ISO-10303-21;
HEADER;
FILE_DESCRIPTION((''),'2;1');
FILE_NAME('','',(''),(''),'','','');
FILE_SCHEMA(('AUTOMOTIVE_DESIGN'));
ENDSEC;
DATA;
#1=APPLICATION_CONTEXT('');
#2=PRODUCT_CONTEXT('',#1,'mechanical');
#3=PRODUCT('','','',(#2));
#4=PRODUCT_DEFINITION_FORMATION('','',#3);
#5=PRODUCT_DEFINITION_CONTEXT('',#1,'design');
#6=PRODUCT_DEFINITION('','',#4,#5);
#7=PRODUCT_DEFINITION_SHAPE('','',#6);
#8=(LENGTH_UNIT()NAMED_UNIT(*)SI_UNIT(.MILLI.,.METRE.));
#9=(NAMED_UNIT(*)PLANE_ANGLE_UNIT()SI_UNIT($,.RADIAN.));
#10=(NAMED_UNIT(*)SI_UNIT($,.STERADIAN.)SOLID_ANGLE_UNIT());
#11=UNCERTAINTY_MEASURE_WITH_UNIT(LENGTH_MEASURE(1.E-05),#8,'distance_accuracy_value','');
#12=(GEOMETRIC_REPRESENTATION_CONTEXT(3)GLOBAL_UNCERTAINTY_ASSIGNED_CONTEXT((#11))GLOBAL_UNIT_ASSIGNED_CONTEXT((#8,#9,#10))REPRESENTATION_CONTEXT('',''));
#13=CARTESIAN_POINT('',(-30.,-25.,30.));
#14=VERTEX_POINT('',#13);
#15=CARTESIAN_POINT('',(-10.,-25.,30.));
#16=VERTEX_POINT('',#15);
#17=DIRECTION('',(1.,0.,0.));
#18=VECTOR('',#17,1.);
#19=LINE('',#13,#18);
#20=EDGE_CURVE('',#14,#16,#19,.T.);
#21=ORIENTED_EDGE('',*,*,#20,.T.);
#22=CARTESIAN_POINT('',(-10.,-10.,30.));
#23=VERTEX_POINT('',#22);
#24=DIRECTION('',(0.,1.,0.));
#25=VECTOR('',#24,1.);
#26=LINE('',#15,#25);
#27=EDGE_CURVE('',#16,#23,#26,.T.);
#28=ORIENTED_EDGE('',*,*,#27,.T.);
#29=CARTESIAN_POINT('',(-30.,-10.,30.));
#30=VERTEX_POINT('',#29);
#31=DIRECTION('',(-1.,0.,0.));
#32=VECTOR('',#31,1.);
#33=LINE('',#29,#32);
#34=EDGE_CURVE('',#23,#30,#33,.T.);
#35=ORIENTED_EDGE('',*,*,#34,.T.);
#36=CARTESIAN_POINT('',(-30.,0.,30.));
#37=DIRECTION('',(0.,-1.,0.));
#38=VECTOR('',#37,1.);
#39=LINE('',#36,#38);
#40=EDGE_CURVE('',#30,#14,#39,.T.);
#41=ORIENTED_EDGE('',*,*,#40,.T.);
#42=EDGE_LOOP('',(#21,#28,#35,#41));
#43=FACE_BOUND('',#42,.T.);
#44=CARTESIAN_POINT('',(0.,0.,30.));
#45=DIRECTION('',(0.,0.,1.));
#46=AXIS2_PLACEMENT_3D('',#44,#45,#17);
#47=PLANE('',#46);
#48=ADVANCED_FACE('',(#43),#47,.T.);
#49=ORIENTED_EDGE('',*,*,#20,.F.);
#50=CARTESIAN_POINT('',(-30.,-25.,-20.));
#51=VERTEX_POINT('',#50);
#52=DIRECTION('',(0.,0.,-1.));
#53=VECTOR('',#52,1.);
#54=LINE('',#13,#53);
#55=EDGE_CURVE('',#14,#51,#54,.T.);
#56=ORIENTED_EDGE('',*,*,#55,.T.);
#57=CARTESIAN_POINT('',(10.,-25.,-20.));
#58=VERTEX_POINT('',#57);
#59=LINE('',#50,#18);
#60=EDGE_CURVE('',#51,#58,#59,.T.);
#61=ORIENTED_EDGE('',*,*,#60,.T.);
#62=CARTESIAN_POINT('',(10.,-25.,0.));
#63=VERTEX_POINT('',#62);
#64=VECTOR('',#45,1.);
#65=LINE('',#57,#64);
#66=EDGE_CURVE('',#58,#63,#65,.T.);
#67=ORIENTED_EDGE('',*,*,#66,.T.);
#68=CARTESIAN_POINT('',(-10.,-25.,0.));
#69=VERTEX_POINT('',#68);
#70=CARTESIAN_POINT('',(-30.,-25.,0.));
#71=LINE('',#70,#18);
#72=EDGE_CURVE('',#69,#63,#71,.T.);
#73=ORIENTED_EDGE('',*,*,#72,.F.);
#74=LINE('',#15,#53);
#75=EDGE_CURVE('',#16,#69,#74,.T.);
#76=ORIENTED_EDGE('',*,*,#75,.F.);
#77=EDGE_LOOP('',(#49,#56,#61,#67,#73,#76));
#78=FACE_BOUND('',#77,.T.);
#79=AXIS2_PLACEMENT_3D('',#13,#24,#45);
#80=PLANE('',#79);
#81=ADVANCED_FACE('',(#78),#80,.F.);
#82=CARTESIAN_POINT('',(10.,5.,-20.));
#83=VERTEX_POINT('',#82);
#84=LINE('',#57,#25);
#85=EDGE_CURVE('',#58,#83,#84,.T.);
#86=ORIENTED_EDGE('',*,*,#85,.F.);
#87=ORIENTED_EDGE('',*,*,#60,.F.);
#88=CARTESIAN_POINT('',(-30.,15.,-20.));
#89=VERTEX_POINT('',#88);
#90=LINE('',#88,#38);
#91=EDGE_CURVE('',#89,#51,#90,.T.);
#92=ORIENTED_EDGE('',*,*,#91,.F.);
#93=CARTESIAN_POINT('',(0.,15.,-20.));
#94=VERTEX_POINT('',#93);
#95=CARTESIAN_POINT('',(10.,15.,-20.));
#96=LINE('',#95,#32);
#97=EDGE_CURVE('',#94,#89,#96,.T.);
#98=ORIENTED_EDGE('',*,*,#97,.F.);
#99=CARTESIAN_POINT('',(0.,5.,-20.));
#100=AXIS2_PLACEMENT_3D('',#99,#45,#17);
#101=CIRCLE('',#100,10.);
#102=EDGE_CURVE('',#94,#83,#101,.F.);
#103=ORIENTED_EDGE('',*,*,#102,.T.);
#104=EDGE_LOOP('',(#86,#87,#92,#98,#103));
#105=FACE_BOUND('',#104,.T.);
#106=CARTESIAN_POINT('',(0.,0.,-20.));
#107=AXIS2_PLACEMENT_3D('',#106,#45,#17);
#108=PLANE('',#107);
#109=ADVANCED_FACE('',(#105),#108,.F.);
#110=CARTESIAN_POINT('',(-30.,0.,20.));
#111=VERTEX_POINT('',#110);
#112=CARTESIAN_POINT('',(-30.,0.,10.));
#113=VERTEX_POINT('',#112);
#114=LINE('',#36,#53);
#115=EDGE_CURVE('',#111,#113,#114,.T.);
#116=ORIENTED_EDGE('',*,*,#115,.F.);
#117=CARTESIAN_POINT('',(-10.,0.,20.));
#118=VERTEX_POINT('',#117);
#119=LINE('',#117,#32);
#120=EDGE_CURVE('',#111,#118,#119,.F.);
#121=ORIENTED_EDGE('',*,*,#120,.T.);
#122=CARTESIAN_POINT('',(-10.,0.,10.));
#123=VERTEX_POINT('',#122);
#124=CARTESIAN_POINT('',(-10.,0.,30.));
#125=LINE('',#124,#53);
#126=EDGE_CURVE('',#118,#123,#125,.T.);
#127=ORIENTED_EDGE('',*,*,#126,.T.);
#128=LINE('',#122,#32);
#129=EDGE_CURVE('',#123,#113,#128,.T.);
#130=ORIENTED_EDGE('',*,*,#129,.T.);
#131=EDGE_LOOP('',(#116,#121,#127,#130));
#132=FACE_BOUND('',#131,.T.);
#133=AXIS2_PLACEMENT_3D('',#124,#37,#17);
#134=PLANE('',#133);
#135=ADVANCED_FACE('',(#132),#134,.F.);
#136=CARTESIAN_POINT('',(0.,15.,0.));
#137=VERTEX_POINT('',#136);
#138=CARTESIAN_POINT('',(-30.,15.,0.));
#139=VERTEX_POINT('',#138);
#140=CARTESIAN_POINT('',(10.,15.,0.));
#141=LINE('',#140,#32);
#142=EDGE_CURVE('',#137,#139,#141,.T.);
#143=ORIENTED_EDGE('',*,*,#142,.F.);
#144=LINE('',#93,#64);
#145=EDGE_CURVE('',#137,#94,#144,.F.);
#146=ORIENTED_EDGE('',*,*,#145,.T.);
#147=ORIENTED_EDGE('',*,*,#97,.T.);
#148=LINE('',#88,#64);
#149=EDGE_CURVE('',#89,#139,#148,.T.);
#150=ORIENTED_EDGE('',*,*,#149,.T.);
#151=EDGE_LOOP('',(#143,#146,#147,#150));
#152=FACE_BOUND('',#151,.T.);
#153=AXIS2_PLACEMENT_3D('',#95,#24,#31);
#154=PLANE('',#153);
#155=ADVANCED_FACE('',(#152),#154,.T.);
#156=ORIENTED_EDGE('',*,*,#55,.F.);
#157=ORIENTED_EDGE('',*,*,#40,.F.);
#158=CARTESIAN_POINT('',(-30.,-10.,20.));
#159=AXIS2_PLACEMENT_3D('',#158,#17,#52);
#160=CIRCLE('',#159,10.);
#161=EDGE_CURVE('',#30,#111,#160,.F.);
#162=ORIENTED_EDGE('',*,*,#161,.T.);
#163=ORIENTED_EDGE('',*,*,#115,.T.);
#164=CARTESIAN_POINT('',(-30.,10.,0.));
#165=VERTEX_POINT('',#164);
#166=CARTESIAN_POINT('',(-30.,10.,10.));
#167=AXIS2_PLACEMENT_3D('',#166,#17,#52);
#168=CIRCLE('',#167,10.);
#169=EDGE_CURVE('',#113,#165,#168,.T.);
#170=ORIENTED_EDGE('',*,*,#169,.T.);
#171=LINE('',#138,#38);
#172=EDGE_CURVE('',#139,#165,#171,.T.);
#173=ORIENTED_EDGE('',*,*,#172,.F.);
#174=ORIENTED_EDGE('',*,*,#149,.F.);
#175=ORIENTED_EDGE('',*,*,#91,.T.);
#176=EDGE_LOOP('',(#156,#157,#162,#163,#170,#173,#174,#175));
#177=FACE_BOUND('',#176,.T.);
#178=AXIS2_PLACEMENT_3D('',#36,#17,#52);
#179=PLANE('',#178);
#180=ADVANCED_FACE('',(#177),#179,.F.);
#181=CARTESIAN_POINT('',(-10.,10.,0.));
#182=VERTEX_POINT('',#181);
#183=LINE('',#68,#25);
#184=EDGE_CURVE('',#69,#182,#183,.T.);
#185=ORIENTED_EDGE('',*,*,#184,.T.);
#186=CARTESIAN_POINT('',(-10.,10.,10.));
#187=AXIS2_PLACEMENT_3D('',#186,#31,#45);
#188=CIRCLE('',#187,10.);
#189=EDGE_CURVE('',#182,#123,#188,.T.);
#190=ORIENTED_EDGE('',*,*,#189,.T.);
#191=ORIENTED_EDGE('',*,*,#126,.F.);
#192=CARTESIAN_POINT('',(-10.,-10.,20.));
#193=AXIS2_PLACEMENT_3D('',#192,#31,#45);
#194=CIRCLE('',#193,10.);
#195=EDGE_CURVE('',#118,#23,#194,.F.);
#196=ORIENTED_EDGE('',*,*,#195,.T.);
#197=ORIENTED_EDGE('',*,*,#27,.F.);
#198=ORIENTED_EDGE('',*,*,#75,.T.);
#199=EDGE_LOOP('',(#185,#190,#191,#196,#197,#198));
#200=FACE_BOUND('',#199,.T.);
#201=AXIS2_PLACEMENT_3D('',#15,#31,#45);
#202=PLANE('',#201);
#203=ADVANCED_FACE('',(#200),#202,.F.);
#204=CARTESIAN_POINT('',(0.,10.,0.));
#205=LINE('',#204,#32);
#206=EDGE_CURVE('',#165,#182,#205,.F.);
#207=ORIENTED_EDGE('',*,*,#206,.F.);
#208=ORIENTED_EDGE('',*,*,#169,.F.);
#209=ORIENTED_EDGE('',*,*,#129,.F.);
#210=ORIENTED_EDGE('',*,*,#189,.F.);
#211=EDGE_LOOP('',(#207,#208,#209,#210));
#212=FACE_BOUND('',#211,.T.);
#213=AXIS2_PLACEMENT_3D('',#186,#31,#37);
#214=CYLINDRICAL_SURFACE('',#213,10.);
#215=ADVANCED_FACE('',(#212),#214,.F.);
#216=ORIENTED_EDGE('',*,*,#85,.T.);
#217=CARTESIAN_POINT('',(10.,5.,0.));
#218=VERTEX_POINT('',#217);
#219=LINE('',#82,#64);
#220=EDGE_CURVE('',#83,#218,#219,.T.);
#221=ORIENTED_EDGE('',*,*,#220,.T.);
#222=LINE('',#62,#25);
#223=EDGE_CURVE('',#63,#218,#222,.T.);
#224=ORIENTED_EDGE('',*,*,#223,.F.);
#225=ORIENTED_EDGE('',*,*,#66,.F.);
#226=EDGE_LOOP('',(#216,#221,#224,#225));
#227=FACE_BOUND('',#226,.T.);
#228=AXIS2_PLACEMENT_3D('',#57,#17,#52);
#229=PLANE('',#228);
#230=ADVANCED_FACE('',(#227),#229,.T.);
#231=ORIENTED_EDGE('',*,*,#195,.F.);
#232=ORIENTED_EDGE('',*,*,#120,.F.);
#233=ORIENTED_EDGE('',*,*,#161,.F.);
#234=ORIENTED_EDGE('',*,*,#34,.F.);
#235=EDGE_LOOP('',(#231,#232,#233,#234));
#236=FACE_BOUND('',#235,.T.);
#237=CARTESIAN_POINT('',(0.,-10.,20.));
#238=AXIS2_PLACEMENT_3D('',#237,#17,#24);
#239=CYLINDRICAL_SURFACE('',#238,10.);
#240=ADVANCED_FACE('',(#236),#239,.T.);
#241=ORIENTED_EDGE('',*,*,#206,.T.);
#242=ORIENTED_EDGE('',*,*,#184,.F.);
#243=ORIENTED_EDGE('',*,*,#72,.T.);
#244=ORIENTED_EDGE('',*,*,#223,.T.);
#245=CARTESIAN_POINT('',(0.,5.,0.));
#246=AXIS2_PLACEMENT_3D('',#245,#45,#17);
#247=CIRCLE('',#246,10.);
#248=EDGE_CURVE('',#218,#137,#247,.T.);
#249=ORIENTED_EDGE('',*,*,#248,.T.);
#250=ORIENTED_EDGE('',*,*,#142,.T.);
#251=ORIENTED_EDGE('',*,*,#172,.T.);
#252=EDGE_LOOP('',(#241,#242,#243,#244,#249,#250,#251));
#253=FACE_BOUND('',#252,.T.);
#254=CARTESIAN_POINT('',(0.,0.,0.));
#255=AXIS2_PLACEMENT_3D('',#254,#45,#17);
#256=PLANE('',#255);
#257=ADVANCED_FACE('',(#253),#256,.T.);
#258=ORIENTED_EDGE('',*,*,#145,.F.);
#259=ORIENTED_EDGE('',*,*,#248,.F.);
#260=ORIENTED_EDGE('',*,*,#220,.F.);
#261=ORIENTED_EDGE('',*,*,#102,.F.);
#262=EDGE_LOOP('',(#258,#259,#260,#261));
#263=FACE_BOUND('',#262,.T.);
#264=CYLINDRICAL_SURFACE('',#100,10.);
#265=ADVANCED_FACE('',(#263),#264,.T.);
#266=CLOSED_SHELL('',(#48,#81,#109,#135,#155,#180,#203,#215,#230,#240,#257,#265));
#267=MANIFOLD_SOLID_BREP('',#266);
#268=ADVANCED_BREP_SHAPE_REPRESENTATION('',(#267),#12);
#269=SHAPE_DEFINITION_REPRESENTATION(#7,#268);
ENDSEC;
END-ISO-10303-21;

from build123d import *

# Parameters (mm, degrees)
SKETCH1_W           = 20
SKETCH1_H           = 25
BOSS_EXTRUDE1_DEPTH = 30
SKETCH2_W           = 40
SKETCH2_H           = 40
BOSS_EXTRUDE2_DEPTH = 20
FILLET1_R           = 10


with BuildPart() as part:
    # Sketch1 → Boss-Extrude1 (new body)
    with BuildSketch(Plane.XY):
        with Locations((-20, -12.5)):
            Rectangle(SKETCH1_W, SKETCH1_H)
    extrude(amount=BOSS_EXTRUDE1_DEPTH)

    # Sketch2 → Boss-Extrude2 (add)
    with BuildSketch(Plane.XY):
        with Locations((-10, -5)):
            Rectangle(SKETCH2_W, SKETCH2_H)
    extrude(amount=-BOSS_EXTRUDE2_DEPTH)

    # Fillet1
    fillet1_edges = [part.edges().sort_by_distance(p)[0] for p in [
        (-20, 0, 0),
        (10, 15, -10),
        (-20, 0, 30),
    ]]
    fillet(fillet1_edges, radius=FILLET1_R)


solid = part.part
